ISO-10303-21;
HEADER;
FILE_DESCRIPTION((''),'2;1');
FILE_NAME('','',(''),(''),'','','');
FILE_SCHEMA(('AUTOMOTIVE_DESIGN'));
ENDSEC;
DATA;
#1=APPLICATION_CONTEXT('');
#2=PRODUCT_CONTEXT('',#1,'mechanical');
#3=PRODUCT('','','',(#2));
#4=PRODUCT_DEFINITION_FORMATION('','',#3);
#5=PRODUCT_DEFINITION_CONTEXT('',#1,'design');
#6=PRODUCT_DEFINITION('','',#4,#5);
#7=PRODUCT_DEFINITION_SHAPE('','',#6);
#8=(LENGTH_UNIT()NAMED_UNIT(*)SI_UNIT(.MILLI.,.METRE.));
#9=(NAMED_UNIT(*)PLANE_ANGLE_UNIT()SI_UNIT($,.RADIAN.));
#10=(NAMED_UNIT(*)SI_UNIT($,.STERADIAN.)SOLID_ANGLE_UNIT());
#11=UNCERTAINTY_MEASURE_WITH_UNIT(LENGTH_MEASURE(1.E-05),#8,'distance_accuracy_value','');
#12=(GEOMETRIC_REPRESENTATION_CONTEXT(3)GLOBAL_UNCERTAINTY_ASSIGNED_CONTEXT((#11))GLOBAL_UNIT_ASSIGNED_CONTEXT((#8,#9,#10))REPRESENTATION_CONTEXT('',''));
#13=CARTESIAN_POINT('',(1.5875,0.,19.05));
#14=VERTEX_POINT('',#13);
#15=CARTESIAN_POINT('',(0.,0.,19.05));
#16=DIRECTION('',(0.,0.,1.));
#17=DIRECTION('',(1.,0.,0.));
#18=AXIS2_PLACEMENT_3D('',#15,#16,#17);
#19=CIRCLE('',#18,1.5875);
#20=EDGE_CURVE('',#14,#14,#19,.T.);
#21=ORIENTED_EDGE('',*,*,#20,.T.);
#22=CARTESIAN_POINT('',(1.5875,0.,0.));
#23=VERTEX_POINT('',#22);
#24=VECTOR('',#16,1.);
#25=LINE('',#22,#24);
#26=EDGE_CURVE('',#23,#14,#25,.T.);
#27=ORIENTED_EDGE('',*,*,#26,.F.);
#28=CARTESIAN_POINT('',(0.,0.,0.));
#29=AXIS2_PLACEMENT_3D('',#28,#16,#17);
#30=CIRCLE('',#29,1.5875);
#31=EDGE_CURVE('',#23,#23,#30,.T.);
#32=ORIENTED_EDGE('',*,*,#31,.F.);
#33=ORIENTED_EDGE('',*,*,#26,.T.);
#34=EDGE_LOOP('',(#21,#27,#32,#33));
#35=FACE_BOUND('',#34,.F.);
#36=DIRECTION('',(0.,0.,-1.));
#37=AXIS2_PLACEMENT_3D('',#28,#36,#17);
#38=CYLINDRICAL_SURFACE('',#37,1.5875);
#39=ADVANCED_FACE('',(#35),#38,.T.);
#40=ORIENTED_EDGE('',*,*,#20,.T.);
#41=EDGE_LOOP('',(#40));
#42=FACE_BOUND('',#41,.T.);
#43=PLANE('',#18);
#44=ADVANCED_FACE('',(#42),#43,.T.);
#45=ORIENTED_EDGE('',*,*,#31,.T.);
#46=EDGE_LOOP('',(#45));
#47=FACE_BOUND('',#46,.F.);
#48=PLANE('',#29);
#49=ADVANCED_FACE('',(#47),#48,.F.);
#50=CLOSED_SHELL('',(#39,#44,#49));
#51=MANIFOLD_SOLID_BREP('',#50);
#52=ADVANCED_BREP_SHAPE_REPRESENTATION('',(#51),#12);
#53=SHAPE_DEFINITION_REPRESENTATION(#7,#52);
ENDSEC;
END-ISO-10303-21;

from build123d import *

# Parameters (mm, degrees)
F0_R     = 1.5875
F1_DEPTH = 19.05


# Not quite as in the source:
# - a length typed as a fraction of an inch, garbled in the dataset ("3 / 203.2 mm" for 3/8 in), is restored


with BuildPart() as f1:
    # F0 (on Top) → F1 (new body)
    with BuildSketch(Plane.XY):
        Circle(F0_R)
    extrude(amount=F1_DEPTH)


solid = f1.part
